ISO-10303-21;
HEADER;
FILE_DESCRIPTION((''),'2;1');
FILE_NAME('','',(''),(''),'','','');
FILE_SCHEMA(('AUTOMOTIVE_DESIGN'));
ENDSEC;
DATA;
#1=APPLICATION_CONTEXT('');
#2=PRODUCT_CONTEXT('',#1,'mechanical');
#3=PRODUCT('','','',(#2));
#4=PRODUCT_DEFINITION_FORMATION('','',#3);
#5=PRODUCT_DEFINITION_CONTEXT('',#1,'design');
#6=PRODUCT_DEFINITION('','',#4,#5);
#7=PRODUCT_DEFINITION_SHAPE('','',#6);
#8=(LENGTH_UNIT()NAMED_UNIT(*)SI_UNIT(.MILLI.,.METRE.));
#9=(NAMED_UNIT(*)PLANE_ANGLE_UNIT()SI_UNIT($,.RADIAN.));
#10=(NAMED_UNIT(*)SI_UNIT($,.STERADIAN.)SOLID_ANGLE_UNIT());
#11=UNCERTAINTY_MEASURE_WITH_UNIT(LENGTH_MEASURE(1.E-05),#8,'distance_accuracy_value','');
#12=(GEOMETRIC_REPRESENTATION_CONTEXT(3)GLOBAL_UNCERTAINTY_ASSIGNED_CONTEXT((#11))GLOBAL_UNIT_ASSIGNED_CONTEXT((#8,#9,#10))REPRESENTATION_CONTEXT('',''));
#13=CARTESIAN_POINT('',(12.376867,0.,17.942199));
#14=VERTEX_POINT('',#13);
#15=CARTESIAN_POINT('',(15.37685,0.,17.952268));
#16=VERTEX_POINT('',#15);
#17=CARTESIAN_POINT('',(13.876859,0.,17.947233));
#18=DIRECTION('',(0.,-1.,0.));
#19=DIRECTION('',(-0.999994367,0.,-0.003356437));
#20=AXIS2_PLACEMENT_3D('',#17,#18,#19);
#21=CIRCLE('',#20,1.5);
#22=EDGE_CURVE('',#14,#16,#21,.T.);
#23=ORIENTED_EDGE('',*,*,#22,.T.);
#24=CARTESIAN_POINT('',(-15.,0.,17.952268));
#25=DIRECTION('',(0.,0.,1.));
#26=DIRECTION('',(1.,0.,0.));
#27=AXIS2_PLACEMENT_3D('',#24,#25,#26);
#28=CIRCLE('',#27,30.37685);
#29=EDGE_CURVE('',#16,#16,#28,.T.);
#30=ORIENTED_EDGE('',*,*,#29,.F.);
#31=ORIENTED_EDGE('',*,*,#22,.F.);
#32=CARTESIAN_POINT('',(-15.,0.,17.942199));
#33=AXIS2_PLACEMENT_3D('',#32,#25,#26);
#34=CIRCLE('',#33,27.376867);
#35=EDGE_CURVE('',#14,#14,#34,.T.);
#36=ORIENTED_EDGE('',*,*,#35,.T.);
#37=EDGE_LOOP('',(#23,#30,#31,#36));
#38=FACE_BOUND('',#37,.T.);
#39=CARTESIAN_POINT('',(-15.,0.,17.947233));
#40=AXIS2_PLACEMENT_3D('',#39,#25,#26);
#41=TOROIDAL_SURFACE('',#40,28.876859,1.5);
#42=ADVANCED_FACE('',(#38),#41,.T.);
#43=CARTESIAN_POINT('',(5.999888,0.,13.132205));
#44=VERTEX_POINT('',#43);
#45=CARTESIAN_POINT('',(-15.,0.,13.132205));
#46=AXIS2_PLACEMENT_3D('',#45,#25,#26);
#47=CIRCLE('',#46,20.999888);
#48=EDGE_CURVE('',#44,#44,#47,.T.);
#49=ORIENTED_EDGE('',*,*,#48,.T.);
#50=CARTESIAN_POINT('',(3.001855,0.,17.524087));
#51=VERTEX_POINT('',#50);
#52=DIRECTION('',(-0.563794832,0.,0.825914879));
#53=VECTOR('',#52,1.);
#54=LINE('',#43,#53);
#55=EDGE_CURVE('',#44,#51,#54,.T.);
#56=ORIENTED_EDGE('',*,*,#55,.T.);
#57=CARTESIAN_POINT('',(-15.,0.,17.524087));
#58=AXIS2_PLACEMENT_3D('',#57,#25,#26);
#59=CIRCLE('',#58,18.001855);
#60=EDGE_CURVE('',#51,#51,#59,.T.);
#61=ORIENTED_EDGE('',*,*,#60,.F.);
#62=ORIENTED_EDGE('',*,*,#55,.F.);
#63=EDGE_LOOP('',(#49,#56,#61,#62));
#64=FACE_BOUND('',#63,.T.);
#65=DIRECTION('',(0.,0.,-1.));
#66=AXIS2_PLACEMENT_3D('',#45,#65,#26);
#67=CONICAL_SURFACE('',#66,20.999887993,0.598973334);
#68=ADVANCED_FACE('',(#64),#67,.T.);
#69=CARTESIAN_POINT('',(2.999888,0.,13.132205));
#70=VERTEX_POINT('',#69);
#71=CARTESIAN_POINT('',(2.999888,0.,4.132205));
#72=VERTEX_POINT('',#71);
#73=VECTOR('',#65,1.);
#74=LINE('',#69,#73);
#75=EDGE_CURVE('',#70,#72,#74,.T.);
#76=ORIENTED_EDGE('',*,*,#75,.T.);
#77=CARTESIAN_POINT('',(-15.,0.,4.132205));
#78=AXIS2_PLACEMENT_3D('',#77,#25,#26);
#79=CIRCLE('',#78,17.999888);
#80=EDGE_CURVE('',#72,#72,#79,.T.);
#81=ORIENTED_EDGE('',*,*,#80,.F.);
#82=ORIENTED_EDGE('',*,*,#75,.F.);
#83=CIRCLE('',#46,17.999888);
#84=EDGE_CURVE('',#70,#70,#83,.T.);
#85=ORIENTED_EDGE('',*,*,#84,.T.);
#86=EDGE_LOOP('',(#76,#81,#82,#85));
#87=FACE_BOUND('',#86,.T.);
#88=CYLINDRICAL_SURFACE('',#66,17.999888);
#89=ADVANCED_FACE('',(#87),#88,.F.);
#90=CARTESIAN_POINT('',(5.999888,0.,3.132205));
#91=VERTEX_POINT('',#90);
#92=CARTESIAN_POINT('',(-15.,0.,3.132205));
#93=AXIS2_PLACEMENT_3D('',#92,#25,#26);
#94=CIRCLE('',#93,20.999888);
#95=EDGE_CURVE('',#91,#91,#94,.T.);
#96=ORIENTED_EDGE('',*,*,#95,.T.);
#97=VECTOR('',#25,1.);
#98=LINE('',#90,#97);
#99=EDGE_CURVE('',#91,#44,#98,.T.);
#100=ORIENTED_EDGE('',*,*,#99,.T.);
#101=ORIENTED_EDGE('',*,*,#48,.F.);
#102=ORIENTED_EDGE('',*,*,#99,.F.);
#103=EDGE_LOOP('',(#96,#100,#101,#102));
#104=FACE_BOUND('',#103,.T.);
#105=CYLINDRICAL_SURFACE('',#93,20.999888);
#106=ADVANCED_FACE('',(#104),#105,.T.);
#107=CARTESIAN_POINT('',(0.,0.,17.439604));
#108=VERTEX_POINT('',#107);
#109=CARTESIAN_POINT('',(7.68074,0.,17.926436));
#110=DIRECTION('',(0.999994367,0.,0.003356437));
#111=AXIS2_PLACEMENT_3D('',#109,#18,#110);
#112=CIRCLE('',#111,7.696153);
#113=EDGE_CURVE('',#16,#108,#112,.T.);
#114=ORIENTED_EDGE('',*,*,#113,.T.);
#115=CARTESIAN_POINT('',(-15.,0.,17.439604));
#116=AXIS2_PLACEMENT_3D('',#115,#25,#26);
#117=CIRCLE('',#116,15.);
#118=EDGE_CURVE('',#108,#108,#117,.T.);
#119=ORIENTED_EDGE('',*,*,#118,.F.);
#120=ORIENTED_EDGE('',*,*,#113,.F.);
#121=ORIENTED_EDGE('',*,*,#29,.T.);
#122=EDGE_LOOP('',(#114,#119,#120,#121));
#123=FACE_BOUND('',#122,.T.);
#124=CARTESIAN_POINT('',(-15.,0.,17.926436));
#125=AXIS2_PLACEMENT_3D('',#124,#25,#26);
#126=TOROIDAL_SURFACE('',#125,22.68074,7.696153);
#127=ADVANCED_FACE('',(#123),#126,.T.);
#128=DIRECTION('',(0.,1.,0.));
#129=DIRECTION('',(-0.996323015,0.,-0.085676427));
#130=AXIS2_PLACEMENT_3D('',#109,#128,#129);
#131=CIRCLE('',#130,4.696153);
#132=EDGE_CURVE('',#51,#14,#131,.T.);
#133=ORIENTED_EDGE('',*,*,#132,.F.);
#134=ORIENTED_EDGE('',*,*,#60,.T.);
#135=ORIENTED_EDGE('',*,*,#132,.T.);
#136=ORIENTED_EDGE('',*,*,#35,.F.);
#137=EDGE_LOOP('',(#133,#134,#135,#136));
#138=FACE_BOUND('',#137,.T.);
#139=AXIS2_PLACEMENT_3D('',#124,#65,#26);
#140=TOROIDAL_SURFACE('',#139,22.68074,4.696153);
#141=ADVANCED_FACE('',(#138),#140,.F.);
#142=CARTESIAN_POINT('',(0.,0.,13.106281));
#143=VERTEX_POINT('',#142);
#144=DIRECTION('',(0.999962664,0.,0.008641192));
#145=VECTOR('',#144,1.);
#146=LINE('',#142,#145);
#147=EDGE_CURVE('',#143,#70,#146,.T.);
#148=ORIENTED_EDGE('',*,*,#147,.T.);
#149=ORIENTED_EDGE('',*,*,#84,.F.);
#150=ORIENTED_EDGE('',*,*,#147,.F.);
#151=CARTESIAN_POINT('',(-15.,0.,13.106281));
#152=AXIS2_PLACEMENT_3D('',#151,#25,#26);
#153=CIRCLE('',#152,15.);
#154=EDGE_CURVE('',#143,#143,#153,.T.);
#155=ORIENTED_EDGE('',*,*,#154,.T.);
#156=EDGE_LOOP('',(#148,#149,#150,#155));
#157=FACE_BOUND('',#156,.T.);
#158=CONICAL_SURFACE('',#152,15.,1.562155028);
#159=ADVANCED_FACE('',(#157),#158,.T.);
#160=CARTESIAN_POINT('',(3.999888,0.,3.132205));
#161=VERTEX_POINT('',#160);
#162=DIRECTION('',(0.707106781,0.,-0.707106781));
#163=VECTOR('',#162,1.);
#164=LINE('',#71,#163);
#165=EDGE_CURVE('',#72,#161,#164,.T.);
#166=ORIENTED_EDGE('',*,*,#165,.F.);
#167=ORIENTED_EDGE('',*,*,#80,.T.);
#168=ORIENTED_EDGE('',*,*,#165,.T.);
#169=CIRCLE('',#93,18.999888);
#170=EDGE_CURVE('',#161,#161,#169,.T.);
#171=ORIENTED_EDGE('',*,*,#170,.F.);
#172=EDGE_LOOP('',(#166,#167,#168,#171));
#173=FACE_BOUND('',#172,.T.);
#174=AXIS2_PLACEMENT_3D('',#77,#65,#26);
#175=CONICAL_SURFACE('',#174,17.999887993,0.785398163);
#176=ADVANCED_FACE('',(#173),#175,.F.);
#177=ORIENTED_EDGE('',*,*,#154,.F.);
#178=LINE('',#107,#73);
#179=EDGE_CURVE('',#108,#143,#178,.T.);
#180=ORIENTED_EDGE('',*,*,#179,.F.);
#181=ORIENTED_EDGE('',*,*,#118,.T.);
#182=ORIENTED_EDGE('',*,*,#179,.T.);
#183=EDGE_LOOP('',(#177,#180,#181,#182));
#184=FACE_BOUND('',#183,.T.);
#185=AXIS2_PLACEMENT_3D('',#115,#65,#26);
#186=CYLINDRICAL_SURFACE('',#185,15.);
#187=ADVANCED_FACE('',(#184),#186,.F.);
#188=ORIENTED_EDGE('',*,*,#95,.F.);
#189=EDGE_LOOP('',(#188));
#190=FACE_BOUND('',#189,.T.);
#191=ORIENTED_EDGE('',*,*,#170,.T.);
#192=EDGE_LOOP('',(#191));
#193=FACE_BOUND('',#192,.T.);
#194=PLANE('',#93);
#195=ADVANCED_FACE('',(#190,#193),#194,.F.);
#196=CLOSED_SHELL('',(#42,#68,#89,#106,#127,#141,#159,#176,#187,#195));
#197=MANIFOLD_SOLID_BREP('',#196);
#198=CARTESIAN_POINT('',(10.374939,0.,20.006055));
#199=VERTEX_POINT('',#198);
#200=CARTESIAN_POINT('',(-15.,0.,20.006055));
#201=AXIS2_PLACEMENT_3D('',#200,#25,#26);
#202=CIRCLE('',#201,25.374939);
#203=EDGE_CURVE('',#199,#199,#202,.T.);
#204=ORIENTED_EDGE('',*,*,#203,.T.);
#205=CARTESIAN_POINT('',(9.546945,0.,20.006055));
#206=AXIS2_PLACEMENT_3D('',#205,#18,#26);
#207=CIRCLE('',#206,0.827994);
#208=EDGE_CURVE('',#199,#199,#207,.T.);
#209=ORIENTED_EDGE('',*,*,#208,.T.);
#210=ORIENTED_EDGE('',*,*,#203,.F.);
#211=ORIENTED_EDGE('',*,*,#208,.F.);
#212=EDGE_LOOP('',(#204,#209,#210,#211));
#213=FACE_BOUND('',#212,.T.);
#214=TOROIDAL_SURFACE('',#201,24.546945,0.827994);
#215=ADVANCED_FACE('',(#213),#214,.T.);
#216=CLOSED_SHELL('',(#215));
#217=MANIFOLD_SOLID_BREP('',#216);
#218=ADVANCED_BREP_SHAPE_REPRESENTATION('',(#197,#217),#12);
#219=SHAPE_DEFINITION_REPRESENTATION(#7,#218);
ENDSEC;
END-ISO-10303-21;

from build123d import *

# Parameters (mm, degrees)
F0_R    = 0.8279940084
F2_SIZE = 1


with BuildPart() as f1:
    # F0 (on Front) → F1 (revolve)
    with BuildSketch(Plane.XZ):
        with Locations((9.5469448715, 20.0060550123)):
            Circle(F0_R)
    revolve(axis=Axis((-15, 0, 28.4551028162), (0, 0, 1)))


with BuildPart() as f1b:
    # F0 (on Front) → F1, piece 2 (revolve)
    with BuildSketch(Plane.XZ):
        with BuildLine():
            ThreePointArc((15.3768501777, 17.9522678642), (7.4242930295, 25.6183157406), (0, 17.4396038463))
            Line((0, 17.4396038463), (0, 13.1062809378))
            Line((0, 13.1062809378), (2.9998879926, 13.1322045127))
            Line((2.9998879926, 13.1322045127), (2.9998879926, 3.1322045127))
            Line((2.9998879926, 3.1322045127), (5.9998879926, 3.1322045127))
            Line((5.9998879926, 3.1322045127), (5.9998879926, 13.1322045127))
            Line((5.9998879926, 13.1322045127), (3.0018545765, 17.5240865694))
            ThreePointArc((3.0018545765, 17.5240865694), (7.4715065543, 22.6179260851), (12.3768670762, 17.9421985519))
            ThreePointArc((12.3768670762, 17.9421985519), (13.8818932831, 16.4472416573), (15.3768501777, 17.9522678642))
        make_face()
        with BuildLine():
            Line((0, 17.4396038463), (0, 18.1062809378))
            Line((0, 18.1062809378), (0.006442766, 17.6866691129))
            Line((0.006442766, 17.6866691129), (0.0128855321, 17.267057288))
            ThreePointArc((0.0128855321, 17.267057288), (0.0059578458, 17.353294354), (0, 17.4396038463))
        make_face(mode=Mode.SUBTRACT)
        with BuildLine():
            Line((0.006442766, 17.6866691129), (0, 18.1062809378))
            Line((0, 18.1062809378), (0, 17.4396038463))
            ThreePointArc((0, 17.4396038463), (0.0059578458, 17.353294354), (0.0128855321, 17.267057288))
            Line((0.0128855321, 17.267057288), (0.006442766, 17.6866691129))
        make_face()
    revolve(axis=Axis((-15, 0, 28.4551028162), (0, 0, 1)))

    # F2
    f2_edges = [f1b.edges().sort_by_distance(p)[0] for p in [
        (-32.999888, 0, 3.132205),
    ]]
    chamfer(f2_edges, length=F2_SIZE)


solid = Compound([f1.part, f1b.part])
